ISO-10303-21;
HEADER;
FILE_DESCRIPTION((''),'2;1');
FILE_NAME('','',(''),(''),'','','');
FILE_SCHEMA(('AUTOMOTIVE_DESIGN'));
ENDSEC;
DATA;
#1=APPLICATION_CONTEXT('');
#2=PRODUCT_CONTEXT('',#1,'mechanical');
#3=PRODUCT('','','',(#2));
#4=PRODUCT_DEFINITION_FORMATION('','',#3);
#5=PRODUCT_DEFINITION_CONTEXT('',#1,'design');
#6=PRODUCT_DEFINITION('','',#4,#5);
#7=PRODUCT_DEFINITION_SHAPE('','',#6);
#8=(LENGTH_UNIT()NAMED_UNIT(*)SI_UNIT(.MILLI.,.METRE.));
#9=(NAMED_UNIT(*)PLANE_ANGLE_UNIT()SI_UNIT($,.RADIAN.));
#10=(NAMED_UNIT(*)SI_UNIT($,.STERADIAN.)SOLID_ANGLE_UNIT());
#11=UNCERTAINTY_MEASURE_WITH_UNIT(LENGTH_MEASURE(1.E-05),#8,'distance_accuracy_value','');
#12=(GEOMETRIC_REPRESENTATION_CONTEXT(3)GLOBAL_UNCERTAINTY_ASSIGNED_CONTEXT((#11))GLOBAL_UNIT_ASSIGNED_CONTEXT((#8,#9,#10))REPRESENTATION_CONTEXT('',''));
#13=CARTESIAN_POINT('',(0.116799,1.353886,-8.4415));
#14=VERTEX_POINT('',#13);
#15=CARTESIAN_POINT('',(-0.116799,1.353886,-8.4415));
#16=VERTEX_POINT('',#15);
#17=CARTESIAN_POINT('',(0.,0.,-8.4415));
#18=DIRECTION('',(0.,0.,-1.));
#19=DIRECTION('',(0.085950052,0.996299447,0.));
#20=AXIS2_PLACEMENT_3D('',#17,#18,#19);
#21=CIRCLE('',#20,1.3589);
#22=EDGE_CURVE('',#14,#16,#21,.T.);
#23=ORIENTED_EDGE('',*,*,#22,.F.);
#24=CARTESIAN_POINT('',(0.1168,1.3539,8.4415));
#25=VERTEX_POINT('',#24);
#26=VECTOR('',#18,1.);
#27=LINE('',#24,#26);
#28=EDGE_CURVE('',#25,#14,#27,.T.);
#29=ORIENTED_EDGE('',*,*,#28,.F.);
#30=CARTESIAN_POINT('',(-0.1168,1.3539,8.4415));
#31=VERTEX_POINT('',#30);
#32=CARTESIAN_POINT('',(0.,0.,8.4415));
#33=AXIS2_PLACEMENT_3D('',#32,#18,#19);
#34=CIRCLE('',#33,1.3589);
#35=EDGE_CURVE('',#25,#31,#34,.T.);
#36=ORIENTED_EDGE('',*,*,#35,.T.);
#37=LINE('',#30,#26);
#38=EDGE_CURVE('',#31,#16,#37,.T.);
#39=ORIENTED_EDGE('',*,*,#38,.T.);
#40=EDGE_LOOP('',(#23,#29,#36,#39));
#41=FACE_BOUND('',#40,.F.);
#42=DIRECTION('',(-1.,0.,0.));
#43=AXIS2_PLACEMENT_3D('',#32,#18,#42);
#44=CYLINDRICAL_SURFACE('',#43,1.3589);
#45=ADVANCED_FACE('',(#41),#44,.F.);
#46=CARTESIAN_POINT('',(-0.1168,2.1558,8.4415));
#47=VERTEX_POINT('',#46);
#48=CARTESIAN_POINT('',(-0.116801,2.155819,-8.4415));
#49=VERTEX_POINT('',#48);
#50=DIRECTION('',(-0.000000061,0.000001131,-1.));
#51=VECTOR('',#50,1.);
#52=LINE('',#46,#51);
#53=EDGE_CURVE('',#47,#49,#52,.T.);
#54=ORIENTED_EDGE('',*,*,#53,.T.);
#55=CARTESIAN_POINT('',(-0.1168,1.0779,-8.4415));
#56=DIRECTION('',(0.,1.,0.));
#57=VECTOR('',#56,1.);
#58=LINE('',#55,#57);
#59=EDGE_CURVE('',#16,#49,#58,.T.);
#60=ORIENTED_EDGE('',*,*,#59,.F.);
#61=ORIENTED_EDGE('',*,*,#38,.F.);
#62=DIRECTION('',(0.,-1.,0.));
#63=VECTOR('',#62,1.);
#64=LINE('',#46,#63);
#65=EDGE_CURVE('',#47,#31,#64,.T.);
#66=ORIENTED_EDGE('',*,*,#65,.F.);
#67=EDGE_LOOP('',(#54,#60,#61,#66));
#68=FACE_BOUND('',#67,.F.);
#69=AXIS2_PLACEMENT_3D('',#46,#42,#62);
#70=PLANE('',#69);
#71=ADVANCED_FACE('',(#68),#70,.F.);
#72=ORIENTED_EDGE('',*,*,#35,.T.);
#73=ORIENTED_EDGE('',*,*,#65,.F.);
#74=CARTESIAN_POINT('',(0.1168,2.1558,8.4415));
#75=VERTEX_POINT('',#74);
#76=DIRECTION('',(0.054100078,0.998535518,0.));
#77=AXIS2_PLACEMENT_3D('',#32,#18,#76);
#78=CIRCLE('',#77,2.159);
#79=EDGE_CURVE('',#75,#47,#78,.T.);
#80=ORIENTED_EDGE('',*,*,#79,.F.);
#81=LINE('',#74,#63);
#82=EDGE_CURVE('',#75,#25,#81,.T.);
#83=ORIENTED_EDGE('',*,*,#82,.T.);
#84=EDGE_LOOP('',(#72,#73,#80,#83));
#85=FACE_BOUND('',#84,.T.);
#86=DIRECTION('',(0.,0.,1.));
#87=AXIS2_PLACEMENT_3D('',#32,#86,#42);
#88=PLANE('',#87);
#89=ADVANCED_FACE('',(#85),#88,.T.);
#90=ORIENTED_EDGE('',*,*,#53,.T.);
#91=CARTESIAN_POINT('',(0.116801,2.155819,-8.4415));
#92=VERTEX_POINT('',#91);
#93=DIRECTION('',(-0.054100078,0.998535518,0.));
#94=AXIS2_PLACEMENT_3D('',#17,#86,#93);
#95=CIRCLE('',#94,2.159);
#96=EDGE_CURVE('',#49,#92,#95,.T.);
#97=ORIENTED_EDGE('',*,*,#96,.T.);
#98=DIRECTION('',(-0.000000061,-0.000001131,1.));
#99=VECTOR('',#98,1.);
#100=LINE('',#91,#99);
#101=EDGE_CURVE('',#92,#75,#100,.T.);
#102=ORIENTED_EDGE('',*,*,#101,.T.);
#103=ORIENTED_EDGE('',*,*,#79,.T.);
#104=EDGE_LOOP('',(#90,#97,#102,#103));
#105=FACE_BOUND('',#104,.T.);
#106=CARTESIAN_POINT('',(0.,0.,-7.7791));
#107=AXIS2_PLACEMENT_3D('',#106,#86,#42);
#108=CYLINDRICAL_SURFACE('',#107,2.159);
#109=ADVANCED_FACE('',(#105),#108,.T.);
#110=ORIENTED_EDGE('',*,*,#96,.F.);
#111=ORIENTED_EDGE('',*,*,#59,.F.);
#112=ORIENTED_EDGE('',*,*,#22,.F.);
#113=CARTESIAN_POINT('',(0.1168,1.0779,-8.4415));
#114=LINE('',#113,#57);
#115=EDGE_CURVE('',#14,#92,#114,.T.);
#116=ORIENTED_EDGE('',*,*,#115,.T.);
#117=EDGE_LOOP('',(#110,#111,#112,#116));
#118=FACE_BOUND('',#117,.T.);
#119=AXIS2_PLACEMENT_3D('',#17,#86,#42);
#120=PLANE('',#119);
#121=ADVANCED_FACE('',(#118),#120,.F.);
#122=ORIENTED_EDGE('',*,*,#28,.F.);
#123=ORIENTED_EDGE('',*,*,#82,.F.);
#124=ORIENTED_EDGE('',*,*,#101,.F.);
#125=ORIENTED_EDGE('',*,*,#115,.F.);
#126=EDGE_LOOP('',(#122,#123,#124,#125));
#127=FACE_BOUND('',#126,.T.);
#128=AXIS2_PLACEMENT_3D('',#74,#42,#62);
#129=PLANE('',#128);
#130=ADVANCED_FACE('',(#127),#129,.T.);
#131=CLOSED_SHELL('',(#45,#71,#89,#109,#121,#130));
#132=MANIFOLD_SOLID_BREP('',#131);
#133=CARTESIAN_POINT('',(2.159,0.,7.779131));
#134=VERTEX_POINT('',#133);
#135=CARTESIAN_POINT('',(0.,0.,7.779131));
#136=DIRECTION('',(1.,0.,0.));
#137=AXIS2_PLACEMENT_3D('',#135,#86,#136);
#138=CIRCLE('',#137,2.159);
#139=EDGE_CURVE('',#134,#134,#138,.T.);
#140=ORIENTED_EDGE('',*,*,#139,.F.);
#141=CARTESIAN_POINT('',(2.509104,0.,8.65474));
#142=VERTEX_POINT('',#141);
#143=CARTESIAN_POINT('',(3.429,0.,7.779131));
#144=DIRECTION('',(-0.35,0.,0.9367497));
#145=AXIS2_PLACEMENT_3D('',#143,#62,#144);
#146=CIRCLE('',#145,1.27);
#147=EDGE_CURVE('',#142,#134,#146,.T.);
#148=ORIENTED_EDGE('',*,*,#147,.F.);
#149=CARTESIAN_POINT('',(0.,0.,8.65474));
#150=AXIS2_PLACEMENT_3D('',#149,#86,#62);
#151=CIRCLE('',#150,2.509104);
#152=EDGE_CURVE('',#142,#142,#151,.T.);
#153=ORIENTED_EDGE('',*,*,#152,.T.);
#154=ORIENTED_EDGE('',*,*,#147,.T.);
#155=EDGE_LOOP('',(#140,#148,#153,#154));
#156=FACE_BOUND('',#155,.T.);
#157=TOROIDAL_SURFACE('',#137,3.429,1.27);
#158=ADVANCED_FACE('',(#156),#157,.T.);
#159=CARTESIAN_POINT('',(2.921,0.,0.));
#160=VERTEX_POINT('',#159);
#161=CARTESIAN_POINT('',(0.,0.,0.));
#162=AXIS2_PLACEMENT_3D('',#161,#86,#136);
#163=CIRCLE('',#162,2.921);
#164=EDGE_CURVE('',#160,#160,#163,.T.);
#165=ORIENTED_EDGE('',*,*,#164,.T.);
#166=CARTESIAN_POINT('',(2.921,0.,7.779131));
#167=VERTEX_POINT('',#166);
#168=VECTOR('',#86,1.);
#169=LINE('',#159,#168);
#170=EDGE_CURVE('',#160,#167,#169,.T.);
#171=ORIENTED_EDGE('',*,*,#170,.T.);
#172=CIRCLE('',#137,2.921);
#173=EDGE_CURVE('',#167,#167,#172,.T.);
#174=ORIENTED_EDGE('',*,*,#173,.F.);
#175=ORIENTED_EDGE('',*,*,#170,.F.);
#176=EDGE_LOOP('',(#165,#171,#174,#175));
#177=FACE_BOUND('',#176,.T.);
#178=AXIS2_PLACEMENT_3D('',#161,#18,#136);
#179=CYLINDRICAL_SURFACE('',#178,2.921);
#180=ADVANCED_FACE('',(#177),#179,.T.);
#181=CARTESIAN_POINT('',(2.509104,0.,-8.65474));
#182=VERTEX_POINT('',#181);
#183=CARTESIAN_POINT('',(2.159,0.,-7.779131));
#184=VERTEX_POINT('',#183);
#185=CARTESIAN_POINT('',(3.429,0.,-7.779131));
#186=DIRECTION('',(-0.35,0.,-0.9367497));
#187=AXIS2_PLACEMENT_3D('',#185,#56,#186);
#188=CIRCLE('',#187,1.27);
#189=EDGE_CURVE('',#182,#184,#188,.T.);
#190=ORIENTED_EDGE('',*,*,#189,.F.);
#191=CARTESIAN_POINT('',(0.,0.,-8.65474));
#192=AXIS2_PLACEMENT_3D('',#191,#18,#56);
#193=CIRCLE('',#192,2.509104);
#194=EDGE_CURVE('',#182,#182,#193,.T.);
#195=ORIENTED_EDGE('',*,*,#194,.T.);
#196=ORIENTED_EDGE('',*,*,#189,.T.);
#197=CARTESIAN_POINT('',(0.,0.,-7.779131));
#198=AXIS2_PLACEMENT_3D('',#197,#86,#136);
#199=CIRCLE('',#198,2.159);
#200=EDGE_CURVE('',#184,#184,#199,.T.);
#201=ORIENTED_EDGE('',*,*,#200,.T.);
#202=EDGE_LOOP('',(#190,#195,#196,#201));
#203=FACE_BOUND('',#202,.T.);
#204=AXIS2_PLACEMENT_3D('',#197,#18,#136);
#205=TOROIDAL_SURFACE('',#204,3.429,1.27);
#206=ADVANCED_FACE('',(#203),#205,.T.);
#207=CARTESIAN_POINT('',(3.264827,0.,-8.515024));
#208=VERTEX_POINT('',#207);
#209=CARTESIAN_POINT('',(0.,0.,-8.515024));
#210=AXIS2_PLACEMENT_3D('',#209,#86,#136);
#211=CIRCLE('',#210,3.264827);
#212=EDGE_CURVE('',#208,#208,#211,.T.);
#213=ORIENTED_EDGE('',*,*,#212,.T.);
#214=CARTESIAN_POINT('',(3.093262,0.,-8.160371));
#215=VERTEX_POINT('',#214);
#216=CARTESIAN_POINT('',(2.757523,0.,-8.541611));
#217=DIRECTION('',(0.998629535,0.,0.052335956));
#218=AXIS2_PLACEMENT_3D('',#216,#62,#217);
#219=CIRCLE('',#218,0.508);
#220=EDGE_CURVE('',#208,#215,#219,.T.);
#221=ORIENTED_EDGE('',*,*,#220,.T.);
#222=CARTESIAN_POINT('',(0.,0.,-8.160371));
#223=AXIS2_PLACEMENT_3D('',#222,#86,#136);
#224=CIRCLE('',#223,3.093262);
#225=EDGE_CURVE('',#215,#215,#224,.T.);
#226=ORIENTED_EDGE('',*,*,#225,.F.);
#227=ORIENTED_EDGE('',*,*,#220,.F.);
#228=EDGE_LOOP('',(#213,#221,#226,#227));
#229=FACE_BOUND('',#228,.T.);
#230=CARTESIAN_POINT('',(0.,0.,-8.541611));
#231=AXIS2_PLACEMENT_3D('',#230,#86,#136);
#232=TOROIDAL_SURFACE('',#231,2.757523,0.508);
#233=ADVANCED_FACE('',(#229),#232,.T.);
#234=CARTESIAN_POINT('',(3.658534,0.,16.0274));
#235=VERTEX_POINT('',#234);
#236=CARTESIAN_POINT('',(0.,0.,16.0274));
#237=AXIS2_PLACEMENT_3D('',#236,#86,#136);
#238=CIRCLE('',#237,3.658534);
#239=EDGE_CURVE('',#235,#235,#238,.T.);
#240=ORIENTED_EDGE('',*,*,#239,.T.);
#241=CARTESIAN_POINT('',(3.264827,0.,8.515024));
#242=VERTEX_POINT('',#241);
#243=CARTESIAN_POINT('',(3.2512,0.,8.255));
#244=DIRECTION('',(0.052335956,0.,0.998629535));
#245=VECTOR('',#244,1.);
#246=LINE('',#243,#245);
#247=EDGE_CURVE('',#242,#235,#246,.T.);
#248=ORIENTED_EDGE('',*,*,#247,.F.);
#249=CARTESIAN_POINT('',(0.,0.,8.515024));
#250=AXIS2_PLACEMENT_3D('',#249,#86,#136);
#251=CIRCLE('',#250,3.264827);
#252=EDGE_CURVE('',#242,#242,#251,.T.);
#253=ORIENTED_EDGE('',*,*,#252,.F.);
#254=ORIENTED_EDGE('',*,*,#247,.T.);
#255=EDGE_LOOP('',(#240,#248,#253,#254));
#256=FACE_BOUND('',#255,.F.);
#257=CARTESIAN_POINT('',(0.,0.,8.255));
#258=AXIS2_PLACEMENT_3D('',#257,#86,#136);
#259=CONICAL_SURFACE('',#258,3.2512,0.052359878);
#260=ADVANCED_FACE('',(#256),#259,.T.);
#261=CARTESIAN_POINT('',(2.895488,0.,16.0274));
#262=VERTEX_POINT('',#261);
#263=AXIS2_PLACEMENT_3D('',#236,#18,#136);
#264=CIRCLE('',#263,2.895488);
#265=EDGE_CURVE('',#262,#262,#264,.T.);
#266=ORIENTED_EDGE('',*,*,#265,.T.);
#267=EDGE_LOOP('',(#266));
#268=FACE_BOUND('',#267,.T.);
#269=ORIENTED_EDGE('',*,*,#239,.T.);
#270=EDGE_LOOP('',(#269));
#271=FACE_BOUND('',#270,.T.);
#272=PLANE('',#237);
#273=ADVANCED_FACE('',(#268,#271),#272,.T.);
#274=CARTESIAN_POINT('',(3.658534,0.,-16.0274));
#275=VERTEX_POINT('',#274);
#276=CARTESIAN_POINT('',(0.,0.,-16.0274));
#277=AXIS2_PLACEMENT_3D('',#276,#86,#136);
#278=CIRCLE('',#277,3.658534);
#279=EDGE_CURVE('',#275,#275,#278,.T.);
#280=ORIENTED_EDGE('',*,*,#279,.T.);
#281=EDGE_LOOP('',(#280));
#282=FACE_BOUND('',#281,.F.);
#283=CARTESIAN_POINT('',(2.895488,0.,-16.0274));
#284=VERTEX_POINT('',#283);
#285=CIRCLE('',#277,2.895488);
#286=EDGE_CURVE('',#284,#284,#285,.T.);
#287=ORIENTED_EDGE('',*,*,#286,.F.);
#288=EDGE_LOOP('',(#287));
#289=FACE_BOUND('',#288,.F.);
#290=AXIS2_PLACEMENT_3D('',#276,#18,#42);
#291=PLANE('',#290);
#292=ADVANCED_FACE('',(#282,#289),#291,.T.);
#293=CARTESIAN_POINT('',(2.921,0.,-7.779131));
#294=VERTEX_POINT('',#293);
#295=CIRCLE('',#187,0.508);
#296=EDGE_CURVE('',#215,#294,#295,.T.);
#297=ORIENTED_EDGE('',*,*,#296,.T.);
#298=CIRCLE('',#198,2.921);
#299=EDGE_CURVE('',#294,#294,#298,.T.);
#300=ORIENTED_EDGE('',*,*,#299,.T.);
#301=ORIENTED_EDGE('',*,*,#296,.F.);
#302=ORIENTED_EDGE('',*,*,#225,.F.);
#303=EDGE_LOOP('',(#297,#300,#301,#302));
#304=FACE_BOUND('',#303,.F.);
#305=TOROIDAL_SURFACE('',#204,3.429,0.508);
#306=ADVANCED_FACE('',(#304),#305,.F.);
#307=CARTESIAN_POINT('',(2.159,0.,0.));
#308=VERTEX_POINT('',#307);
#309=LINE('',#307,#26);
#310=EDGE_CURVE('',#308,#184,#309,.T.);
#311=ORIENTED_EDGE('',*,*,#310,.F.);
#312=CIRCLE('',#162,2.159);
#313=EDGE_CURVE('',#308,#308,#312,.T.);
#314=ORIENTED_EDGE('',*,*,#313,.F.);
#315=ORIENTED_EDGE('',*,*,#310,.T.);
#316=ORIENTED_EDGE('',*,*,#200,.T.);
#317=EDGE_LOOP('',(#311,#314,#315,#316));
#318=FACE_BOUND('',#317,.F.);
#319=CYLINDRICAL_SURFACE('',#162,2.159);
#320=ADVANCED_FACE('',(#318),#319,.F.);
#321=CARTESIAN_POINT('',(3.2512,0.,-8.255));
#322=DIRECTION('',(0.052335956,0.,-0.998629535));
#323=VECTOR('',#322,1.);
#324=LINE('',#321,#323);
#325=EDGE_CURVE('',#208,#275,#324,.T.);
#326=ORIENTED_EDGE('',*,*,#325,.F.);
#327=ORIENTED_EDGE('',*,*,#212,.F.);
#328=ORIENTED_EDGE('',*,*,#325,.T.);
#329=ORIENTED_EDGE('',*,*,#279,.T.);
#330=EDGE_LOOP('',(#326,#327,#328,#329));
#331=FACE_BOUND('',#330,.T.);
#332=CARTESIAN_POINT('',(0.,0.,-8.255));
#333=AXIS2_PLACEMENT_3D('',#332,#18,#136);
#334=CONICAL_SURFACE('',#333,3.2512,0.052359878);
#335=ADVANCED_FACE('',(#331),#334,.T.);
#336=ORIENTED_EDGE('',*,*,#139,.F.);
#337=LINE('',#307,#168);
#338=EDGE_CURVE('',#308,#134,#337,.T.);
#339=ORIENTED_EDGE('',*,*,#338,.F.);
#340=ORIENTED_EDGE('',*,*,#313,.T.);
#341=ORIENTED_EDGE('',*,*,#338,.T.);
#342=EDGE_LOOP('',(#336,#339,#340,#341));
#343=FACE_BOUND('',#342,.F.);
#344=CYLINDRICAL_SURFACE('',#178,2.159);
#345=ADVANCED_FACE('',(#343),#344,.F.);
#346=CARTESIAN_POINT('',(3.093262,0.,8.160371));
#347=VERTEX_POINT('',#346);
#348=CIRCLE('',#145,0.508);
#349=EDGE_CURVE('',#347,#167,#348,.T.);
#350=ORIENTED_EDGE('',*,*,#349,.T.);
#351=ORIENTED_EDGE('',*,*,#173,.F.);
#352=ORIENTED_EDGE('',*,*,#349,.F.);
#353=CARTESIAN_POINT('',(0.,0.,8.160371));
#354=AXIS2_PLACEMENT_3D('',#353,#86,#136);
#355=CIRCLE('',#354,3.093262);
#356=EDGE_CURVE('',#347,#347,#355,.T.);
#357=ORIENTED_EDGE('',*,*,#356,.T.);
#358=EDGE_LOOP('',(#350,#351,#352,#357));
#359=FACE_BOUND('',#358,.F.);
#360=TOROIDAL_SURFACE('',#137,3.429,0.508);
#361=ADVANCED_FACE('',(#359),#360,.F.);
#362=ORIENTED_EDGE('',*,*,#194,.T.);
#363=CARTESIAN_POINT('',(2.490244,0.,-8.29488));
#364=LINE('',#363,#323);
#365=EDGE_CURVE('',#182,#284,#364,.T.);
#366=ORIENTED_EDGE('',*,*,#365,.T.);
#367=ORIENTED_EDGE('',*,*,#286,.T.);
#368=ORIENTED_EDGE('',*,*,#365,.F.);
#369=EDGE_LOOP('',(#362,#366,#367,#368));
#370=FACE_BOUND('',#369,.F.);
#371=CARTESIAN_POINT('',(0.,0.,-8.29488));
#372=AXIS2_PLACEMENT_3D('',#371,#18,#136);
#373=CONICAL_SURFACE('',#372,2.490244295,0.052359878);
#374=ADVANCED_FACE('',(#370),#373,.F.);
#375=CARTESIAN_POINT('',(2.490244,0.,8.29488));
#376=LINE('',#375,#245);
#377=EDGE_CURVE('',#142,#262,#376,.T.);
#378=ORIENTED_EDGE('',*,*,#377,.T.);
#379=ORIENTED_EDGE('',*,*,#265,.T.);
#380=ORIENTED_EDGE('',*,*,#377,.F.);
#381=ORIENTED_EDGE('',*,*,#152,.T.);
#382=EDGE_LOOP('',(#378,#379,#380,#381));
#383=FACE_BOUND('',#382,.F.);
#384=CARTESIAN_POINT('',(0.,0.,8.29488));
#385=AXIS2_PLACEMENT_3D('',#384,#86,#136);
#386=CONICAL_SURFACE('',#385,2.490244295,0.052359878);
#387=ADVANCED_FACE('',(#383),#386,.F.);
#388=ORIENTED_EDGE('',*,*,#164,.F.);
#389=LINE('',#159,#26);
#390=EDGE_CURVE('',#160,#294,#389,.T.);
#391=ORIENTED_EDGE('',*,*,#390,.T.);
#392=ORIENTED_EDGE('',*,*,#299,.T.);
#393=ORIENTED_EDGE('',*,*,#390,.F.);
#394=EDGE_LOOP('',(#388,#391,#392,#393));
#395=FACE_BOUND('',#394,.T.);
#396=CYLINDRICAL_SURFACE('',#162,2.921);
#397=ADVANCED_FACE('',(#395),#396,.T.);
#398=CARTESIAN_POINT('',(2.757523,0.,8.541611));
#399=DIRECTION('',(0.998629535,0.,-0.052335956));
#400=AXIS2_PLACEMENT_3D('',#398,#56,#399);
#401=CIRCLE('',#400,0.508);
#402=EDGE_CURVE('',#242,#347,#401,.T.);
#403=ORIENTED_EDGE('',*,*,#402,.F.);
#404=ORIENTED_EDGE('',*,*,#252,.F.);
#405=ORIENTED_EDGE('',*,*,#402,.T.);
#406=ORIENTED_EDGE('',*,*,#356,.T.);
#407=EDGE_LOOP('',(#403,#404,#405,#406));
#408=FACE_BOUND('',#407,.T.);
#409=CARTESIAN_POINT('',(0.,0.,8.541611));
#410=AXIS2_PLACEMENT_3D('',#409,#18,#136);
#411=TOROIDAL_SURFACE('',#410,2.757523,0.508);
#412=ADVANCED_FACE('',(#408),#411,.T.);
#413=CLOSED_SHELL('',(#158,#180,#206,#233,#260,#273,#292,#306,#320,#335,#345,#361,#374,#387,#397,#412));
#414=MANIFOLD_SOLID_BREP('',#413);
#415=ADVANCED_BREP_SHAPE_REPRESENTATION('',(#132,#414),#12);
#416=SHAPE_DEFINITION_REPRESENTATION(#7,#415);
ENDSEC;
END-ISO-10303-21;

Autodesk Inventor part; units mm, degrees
ref_plane "YZ Plane" through (0, 0, 0) normal (1, 0, 0) x (0, 1, 0)
ref_plane "XZ Plane" through (0, 0, 0) normal (0, 1, 0) x (-1, 0, 0)
ref_plane "XY Plane" through (0, 0, 0) normal (0, 0, 1) x (1, 0, 0)
sketch "Sketch1" plane through (0, 0, 0) normal (0, 0, 1) x (1, 0, 0)
  circle A0 centre (0, 0) radius 2.921
  dimension "d0" = 5.842
extrude "Extrusion1" add sketch "Sketch1" along normal mid plane 16.51
sketch "Sketch2" plane through (0, 0, 8.255) normal (0, 0, 1) x (1, 0, 0)
  circle A0 centre (0, 0) radius 2.921 construction
  circle A1 centre (0, 0) radius 3.2512
  dimension "d3" = 6.5024
extrude "Extrusion2" add sketch "Sketch2" along normal blind 7.7724 draft 3
fillet "Fillet1" radius 0.508 2 edges at (-2.921, 0, 8.255) (-3.2512, 0, 8.255)
mirror "Mirror1" about plane through (0, 0, 0) normal (0, 0, 1) of "Extrusion2", "Fillet1"
shell "Shell1" thickness 0.762 removed faces 2 at (1.0171, -0.0499, 16.0274) at (1.0171, -0.0499, -16.0274)
sketch "Sketch3" plane through (0, 0, 0) normal (0, 1, 0) x (-1, 0, 0)
  arc A0 (-3.2648, 8.515) -> (-3.0933, 8.1604) centre (-2.7575, 8.5416) ccw projected
  line L0 (-3.2648, 8.515) -> (-3.6585, 16.0274) projected
  line L1 (-3.6585, 16.0274) -> (-2.8955, 16.0274) projected
  line L2 (-2.8955, 16.0274) -> (-2.5091, 8.6547) projected
  arc A1 (-2.159, 7.7791) -> (-2.5091, 8.6547) centre (-3.429, 7.7791) ccw projected
  line L3 (-2.159, 7.7791) -> (-2.159, -7.7791) projected
  arc A2 (-2.5091, -8.6547) -> (-2.159, -7.7791) centre (-3.429, -7.7791) ccw projected
  line L4 (-2.5091, -8.6547) -> (-2.8955, -16.0274) projected
  line L5 (-2.8955, -16.0274) -> (-3.6585, -16.0274) projected
  line L6 (-3.6585, -16.0274) -> (-3.2648, -8.515) projected
  arc A3 (-3.0933, -8.1604) -> (-3.2648, -8.515) centre (-2.7575, -8.5416) ccw projected
  arc A4 (-3.0933, -8.1604) -> (-2.921, -7.7791) centre (-3.429, -7.7791) ccw projected
  line L7 (-2.921, -7.7791) -> (-2.921, 7.7791) projected
  arc A5 (-2.921, 7.7791) -> (-3.0933, 8.1604) centre (-3.429, 7.7791) ccw projected
  arc A6 (3.0933, 8.1604) -> (3.2648, 8.515) centre (2.7575, 8.5416) ccw projected
  arc A7 (3.0933, 8.1604) -> (2.921, 7.7791) centre (3.429, 7.7791) ccw projected
  line L8 (2.921, 7.7791) -> (2.921, -7.7791) projected
  arc A8 (2.921, -7.7791) -> (3.0933, -8.1604) centre (3.429, -7.7791) ccw projected
  arc A9 (3.2648, -8.515) -> (3.0933, -8.1604) centre (2.7575, -8.5416) ccw projected
  line L9 (3.2648, -8.515) -> (3.6585, -16.0274) projected
  line L10 (3.6585, -16.0274) -> (2.8955, -16.0274) projected
  line L11 (2.8955, -16.0274) -> (2.5091, -8.6547) projected
  arc A10 (2.159, -7.7791) -> (2.5091, -8.6547) centre (3.429, -7.7791) ccw projected
  line L12 (2.159, -7.7791) -> (2.159, 7.7791) projected
  arc A11 (2.5091, 8.6547) -> (2.159, 7.7791) centre (3.429, 7.7791) ccw projected
  line L13 (2.5091, 8.6547) -> (2.8955, 16.0274) projected
  line L14 (2.8955, 16.0274) -> (3.6585, 16.0274) projected
  line L15 (3.6585, 16.0274) -> (3.2648, 8.515) projected
  line L16 (1.3589, -8.4415) -> (2.159, -8.4415)
  line L17 (2.159, -8.4415) -> (2.159, 8.4415)
  line L18 (2.159, 8.4415) -> (1.3589, 8.4415)
  line L19 (1.3589, 8.4415) -> (1.3589, -8.4415)
  line L20 (0, 0) -> (5.4328, 0) construction
  line L21 (0, -22.4384) -> (0, 22.4384) projected
  dimension "d8" = 0.8001
revolve "Revolution1" add sketch "Sketch3" angle 360 about axis through (0, 0, -10) along (0, 0, 1) separate body contours L12 L17 L16 L19 L18
sketch "Sketch4" plane through (0, 0, 8.4415) normal (0, 0, 1) x (1, 0, 0)
  circle A0 centre (0, 0) radius 1.3589 projected
  circle A1 centre (0, 0) radius 2.159 projected
  line L0 (0, 0) -> (0, 3.9072) construction
  line L1 (-0.1168, 2.1558) -> (-0.1168, 1.3539)
  line L2 (0.1168, 2.1558) -> (0.1168, 1.3539)
extrude "Extrusion3" cut sketch "Sketch4" against normal through all contours A0 L1 A1 L2 picked at (0.0909, 1.6227) bodies 2
properties part number "16-14 double sided femal tube heat shrink"
